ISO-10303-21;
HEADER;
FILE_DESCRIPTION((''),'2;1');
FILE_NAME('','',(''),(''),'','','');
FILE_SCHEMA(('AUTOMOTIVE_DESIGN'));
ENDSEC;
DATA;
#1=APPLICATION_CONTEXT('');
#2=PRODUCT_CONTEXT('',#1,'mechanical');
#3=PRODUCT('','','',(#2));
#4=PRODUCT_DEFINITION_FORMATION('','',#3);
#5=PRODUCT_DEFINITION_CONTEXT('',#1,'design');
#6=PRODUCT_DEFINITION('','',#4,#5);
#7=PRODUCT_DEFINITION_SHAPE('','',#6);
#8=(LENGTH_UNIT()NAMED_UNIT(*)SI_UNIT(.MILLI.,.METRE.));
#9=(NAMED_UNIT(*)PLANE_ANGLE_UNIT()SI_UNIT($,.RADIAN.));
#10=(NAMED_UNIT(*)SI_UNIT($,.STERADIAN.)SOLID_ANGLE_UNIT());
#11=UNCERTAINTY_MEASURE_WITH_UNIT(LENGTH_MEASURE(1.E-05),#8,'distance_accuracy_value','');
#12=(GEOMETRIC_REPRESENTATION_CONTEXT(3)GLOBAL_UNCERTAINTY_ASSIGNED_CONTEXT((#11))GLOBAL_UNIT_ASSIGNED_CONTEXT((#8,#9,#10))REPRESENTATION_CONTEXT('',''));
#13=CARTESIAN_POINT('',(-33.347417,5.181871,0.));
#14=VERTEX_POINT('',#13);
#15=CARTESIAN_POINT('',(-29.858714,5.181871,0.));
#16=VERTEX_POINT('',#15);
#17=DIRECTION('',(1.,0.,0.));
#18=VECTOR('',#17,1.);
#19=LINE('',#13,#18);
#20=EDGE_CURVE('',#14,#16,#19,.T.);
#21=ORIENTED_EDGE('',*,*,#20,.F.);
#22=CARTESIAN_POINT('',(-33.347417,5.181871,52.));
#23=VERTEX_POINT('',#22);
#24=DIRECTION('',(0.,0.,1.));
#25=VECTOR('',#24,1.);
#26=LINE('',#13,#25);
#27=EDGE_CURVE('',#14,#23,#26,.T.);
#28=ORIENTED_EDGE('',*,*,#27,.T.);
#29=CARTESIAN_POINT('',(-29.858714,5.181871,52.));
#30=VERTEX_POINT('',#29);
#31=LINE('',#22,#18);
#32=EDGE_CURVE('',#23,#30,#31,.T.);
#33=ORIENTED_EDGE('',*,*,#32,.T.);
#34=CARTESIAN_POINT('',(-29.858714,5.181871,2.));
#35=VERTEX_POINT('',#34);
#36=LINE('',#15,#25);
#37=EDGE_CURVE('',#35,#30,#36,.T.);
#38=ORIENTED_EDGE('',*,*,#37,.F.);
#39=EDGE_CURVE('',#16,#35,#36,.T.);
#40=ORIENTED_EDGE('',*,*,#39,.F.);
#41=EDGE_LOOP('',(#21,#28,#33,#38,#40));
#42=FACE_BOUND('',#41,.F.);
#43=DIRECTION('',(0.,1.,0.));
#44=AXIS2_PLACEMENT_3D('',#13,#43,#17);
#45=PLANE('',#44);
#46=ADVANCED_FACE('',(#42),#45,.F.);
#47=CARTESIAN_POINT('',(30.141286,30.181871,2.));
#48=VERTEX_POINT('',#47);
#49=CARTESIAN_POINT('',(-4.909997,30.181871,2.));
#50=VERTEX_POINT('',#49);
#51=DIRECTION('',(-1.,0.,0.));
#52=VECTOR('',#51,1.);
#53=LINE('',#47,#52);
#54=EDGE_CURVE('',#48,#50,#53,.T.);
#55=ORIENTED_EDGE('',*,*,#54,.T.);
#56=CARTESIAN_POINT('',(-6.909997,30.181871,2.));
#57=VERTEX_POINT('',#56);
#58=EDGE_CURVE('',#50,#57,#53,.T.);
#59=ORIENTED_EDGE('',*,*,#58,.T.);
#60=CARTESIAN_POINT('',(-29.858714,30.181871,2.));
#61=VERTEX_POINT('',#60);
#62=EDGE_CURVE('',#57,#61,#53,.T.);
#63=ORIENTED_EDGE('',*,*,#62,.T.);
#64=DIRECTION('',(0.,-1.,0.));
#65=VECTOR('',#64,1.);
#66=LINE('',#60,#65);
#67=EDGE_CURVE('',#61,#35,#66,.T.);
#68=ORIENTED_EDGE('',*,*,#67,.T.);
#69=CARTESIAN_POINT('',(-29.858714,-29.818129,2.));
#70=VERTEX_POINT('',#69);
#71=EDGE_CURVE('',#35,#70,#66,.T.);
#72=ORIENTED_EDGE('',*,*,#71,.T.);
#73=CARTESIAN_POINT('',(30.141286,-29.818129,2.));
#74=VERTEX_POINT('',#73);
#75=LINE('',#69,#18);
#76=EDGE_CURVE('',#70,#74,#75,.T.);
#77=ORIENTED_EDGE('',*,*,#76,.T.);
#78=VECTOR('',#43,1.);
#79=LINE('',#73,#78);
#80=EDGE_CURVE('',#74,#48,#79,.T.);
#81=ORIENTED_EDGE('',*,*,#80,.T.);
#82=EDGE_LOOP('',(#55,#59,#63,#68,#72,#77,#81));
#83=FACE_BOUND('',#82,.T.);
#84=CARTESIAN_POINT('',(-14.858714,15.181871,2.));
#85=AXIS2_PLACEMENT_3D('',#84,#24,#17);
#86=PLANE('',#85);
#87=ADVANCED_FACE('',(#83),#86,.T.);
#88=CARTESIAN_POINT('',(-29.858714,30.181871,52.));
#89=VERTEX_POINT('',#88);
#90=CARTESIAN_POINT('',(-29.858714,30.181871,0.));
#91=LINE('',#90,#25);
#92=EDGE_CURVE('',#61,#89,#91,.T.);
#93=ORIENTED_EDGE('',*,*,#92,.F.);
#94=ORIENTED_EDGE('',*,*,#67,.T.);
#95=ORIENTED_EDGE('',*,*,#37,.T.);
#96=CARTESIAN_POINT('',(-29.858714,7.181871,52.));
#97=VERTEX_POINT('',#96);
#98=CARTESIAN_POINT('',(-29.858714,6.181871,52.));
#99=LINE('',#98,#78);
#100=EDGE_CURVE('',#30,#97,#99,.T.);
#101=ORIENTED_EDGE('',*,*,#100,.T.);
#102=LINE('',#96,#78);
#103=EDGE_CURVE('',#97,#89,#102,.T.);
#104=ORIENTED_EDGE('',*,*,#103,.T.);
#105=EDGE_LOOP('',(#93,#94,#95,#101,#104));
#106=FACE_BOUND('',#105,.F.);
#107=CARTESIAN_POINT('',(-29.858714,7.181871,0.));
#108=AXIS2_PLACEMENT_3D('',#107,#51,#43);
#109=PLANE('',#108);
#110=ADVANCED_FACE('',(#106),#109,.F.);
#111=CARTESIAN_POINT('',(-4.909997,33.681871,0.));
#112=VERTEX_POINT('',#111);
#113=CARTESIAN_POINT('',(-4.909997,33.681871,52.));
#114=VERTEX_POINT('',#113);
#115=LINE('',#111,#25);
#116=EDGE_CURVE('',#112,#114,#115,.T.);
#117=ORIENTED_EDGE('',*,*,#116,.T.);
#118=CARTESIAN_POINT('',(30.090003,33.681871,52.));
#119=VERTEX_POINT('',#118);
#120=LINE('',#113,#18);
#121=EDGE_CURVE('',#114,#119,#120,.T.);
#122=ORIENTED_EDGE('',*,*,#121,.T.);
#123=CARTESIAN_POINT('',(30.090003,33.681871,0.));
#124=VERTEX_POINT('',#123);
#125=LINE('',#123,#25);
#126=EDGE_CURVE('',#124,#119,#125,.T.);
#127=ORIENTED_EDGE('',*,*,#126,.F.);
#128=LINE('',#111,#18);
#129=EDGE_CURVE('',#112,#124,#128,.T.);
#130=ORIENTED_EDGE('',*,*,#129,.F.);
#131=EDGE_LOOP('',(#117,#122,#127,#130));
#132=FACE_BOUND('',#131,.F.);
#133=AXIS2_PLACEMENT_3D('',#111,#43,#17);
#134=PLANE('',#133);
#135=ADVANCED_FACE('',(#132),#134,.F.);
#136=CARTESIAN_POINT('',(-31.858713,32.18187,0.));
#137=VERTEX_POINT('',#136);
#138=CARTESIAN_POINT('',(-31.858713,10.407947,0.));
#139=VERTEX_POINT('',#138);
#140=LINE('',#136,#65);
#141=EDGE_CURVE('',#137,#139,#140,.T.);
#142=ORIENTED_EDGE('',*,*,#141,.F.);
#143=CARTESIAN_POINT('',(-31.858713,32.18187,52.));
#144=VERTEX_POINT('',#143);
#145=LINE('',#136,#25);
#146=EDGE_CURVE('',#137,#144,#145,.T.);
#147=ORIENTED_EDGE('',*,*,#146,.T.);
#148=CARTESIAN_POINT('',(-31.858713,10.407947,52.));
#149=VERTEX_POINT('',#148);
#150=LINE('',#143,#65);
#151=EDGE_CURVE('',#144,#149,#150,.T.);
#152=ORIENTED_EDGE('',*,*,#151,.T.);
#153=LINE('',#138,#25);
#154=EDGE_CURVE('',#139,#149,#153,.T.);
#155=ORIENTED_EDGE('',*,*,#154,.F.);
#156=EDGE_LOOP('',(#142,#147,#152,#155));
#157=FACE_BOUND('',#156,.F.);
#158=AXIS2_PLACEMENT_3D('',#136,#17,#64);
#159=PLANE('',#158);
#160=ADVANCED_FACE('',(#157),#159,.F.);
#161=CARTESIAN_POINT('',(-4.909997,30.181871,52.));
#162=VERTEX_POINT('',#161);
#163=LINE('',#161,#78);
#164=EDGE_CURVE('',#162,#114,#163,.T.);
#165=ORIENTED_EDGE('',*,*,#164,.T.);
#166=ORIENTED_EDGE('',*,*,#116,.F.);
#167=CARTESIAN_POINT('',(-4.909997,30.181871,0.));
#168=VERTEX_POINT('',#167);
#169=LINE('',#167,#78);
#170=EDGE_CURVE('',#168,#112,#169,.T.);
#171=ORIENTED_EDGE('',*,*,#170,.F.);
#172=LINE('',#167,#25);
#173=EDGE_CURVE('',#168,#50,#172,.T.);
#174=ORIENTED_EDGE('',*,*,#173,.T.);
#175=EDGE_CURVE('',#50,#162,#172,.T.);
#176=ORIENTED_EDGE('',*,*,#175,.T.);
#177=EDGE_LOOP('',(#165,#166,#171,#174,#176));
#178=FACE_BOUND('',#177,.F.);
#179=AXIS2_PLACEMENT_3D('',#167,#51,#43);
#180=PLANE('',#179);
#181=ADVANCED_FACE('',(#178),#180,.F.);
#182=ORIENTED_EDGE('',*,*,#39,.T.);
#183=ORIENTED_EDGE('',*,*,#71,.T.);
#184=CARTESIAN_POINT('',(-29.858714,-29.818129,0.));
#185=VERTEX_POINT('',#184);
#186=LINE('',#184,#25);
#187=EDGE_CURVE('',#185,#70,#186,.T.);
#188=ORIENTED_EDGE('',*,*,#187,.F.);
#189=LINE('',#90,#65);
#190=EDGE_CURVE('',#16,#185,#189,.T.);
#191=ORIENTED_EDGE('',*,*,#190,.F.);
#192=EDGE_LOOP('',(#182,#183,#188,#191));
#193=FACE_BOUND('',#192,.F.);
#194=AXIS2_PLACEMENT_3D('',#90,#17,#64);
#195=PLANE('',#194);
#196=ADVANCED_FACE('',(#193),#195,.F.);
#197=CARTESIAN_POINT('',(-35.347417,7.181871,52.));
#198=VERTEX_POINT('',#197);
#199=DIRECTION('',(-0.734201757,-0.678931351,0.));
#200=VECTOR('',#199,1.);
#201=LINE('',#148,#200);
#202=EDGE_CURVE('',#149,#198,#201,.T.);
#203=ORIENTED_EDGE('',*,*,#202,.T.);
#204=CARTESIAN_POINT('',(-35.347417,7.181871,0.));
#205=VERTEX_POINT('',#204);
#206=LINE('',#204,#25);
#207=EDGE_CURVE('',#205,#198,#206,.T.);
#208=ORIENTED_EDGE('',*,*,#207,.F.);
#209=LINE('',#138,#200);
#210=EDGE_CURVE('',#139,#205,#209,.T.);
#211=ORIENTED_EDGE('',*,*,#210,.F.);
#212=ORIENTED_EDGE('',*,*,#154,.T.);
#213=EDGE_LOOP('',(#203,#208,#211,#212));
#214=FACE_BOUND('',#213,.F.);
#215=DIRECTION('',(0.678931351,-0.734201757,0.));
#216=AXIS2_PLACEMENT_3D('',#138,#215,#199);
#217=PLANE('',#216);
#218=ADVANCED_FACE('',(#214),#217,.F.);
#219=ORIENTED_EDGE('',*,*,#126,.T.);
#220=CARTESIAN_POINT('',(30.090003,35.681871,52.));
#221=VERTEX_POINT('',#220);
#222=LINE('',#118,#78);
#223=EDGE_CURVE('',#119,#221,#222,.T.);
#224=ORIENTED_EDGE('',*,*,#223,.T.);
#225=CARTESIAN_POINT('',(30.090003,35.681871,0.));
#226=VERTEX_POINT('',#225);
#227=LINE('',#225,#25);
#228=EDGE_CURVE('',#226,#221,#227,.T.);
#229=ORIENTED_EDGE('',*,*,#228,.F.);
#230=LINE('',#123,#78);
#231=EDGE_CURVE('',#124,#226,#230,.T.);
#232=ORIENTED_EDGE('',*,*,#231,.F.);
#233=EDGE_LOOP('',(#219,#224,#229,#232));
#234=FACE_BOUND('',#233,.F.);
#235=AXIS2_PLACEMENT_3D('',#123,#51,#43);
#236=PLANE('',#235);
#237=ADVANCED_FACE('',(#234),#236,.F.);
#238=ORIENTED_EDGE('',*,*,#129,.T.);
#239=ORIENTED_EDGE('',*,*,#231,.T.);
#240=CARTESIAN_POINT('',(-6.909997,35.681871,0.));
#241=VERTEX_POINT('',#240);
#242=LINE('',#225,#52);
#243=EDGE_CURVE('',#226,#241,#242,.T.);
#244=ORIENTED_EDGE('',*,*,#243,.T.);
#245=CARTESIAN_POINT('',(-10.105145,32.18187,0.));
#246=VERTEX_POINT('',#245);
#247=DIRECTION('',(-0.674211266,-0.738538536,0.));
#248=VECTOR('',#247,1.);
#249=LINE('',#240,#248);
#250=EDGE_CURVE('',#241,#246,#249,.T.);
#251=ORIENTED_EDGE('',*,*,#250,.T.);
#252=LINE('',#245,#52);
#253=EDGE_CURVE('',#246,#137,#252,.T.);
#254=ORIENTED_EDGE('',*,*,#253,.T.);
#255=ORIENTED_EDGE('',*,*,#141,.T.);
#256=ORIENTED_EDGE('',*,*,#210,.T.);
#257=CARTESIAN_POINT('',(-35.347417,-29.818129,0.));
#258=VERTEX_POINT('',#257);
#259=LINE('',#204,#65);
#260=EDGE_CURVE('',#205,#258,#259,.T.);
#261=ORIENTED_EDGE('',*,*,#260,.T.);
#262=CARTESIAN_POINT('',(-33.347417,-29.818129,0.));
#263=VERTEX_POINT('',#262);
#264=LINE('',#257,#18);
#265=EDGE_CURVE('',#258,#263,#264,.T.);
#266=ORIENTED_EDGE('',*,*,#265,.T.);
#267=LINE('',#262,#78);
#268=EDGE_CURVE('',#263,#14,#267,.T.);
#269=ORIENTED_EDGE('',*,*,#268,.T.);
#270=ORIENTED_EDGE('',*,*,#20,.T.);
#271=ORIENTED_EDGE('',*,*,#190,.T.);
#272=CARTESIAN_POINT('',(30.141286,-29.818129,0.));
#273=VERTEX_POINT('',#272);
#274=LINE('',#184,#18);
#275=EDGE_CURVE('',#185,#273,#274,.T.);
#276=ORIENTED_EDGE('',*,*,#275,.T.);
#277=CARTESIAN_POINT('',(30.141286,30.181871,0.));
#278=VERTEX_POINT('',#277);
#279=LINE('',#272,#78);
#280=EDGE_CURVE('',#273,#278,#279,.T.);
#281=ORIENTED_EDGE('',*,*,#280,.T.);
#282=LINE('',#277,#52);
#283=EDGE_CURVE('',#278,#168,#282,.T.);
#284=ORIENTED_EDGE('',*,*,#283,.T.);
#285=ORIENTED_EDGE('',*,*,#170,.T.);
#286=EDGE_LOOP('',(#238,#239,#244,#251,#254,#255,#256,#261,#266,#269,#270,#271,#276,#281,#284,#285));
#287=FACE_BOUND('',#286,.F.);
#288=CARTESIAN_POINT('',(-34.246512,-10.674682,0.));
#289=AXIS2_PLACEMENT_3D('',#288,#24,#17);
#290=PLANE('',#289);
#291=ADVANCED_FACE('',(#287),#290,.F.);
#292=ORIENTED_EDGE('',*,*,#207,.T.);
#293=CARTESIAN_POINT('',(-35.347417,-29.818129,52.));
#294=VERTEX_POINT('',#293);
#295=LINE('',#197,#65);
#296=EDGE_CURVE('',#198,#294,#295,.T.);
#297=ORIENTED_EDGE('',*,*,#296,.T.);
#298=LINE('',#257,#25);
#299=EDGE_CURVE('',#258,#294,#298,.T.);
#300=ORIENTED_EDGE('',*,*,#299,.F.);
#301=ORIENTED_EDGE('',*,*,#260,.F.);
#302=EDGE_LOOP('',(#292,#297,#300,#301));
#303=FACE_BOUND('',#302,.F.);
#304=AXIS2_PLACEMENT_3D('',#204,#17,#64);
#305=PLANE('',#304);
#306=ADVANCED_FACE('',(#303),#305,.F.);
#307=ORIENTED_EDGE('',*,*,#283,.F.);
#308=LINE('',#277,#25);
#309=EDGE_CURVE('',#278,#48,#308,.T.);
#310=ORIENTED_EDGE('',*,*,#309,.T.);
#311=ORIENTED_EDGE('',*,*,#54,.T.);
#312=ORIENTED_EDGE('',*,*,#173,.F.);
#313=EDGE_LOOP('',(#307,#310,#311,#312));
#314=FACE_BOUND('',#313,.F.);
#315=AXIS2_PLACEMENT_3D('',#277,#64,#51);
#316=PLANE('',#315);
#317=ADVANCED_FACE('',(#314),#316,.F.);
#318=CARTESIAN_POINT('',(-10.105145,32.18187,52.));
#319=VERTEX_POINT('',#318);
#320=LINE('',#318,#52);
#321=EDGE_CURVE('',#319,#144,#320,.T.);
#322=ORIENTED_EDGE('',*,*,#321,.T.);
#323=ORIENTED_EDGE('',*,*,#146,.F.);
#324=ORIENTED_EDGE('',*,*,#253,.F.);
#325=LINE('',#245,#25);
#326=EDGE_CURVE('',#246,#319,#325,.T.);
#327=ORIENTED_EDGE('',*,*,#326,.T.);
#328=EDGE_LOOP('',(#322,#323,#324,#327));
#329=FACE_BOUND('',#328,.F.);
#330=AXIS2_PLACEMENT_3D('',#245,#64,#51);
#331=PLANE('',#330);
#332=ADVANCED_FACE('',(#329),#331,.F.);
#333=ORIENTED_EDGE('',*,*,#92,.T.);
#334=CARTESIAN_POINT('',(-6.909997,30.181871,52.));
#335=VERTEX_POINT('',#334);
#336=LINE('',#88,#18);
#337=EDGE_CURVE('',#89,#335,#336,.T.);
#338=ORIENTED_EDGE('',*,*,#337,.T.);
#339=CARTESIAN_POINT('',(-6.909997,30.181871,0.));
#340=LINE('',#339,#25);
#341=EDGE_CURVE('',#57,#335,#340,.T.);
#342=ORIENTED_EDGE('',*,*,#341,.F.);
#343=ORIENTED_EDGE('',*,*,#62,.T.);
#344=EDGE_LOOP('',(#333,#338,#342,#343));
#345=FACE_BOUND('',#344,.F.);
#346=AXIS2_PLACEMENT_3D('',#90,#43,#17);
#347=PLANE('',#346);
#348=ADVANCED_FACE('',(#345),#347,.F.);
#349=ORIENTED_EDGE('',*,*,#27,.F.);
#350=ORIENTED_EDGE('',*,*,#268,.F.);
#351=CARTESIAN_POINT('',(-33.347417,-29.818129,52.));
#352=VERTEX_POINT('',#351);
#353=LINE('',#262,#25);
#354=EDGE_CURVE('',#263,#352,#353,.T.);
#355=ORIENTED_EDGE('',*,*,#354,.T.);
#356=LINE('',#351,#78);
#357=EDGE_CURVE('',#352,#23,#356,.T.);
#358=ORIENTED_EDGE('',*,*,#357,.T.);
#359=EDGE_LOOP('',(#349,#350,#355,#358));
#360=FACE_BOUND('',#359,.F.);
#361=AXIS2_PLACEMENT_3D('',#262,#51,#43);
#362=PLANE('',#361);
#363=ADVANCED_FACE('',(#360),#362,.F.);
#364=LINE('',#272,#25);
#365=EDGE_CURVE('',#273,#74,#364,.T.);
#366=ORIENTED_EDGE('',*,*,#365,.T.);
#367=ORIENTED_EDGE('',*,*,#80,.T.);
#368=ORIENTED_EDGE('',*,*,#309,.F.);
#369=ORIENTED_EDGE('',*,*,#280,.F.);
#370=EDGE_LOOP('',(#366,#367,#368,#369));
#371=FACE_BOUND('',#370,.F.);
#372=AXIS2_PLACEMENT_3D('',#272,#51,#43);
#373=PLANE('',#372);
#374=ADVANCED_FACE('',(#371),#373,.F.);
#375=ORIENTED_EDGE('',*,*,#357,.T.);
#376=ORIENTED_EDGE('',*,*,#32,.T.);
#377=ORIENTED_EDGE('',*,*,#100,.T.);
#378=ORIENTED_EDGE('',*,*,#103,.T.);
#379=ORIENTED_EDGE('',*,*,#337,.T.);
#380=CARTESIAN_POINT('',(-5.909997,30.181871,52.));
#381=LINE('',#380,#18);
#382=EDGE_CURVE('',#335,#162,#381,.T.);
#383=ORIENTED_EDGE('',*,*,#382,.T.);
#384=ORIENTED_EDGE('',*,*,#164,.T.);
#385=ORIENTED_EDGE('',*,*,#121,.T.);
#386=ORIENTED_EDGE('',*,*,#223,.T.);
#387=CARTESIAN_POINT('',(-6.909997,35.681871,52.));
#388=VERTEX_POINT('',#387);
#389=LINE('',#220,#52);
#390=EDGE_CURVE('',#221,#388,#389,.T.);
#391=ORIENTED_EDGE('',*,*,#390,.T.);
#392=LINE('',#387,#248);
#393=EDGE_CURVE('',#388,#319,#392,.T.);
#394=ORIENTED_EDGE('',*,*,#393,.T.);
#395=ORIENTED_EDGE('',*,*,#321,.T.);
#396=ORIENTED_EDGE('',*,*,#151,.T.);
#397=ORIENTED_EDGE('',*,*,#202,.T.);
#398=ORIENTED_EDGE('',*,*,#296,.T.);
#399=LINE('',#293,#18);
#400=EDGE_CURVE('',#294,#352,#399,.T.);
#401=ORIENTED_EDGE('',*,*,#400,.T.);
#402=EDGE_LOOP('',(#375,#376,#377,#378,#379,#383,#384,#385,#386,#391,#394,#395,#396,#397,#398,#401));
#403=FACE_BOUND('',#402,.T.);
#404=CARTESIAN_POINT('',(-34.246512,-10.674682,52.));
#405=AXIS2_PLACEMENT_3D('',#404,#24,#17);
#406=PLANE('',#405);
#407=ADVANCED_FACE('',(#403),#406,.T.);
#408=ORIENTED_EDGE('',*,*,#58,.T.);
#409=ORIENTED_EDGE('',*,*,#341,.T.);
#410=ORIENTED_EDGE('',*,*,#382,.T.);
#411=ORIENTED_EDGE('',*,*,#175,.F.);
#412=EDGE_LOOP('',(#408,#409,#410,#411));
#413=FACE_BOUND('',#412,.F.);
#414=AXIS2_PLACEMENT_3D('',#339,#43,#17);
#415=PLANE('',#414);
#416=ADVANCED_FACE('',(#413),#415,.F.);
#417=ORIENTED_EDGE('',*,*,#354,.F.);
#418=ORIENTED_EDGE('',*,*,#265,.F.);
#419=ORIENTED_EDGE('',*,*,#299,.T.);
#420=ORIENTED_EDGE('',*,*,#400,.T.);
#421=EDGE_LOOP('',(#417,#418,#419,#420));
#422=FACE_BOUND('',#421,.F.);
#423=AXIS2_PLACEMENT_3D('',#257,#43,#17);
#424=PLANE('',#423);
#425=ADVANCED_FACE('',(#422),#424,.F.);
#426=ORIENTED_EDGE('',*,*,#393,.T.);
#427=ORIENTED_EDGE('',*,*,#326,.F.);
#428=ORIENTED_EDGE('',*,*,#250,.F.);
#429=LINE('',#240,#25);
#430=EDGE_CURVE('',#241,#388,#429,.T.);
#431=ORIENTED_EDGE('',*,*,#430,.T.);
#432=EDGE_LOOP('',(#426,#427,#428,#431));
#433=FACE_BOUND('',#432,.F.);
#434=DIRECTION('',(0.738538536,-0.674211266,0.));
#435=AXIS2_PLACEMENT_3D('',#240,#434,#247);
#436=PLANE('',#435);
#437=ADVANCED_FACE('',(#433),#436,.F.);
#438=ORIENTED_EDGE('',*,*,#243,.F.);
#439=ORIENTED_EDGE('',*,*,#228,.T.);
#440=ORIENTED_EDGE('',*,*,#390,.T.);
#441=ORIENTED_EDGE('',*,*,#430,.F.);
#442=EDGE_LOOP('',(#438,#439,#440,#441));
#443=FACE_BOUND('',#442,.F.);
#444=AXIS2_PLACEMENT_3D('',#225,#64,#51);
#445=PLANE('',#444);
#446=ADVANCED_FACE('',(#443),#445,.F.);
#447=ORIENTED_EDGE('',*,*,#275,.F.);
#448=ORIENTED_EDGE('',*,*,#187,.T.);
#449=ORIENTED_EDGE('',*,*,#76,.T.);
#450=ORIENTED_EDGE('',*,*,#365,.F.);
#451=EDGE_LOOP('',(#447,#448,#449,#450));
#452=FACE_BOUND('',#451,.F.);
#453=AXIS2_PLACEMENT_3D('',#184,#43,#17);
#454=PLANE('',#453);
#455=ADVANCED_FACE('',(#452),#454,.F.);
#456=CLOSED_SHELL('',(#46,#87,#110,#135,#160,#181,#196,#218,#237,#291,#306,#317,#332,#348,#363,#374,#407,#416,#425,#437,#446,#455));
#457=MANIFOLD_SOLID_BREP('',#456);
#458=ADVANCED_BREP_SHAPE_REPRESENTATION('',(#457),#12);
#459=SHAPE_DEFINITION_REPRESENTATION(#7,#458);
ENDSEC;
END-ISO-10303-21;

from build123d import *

# Parameters (mm, degrees)
F0_W     = 30
F0_H     = 30
F1_DEPTH = 2
F0_W_2   = 2
F0_H_2   = 1.9999989867
F0_W_3   = 1.9999989867
F0_H_3   = 2
F2_DEPTH = 52


with BuildPart() as f1:
    # F0 (on Top) → F1 (new body)
    with BuildSketch(Plane.XY):
        Polygon((-11.9309425354, 30.1818712056), (-29.8587139696, 30.1818712056), (-29.8587139696, 12.2573869303), (-29.8587139696, 7.1818712056), (-29.8587139696, 5.1818712056), (-29.8587139696, 0.1818712056), (0.1412860304, 0.1818712056), (0.1412860304, 30.1818712056), (-4.8587139696, 30.1818712056), (-4.9099967368, 30.1818712056), (-6.9099967368, 30.1818712056), align=None)
        Polygon((0.1412860304, 0.1818712056), (-29.8587139696, 0.1818712056), (-29.8587139696, -29.8181287944), (-29.847416997, -29.8181287944), (0.1412860304, -29.8181287944), align=None)
        Polygon((30.0900032632, 30.1818712056), (0.1412860304, 30.1818712056), (0.1412860304, 0.1818712056), (30.1412860304, 0.1818712056), (30.1412860304, 30.1818712056), align=None)
        with Locations((15.1412860304, -14.8181287944)):
            Rectangle(F0_W, F0_H)
    extrude(amount=F1_DEPTH)

    # F0 (on Top) → F2 (join)
    with BuildSketch(Plane.XY):
        Polygon((-31.8587129563, 5.1818712056), (-31.8587129563, 7.1818712056), (-35.347416997, 7.1818712056), (-35.347416997, -29.8181287944), (-33.347416997, -29.8181287944), (-33.347416997, 5.1818712056), align=None)
        with Locations((-5.9099967368, 31.1818706989)):
            Rectangle(F0_W_2, F0_H_2)
        Polygon((-6.9099967368, 35.6818712056), (-10.1051449882, 32.1818701923), (-6.9099967368, 32.1818701923), align=None)
        Polygon((-31.8587129563, 7.1818712056), (-31.8587129563, 10.4079470433), (-35.347416997, 7.1818712056), align=None)
        Polygon((-10.1051449882, 32.1818701923), (-11.9309425354, 30.1818712056), (-6.9099967368, 30.1818712056), (-6.9099967368, 32.1818701923), align=None)
        Polygon((-6.9099967368, 35.6818712056), (-6.9099967368, 32.1818701923), (-4.9099967368, 32.1818701923), (-4.9099967368, 33.6818712056), (30.0900032632, 33.6818712056), (30.0900032632, 35.6818712056), align=None)
        Polygon((-29.8587139696, 12.2573869303), (-29.8587139696, 30.1818712056), (-11.9309425354, 30.1818712056), (-10.1051449882, 32.1818701923), (-31.8587129563, 32.1818701923), (-31.8587129563, 10.4079470433), align=None)
        Polygon((-29.8587139696, 7.1818712056), (-29.8587139696, 12.2573869303), (-31.8587129563, 10.4079470433), (-31.8587129563, 7.1818712056), align=None)
        with Locations((-30.8587134629, 6.1818712056)):
            Rectangle(F0_W_3, F0_H_3)
    extrude(amount=F2_DEPTH)


solid = f1.part
